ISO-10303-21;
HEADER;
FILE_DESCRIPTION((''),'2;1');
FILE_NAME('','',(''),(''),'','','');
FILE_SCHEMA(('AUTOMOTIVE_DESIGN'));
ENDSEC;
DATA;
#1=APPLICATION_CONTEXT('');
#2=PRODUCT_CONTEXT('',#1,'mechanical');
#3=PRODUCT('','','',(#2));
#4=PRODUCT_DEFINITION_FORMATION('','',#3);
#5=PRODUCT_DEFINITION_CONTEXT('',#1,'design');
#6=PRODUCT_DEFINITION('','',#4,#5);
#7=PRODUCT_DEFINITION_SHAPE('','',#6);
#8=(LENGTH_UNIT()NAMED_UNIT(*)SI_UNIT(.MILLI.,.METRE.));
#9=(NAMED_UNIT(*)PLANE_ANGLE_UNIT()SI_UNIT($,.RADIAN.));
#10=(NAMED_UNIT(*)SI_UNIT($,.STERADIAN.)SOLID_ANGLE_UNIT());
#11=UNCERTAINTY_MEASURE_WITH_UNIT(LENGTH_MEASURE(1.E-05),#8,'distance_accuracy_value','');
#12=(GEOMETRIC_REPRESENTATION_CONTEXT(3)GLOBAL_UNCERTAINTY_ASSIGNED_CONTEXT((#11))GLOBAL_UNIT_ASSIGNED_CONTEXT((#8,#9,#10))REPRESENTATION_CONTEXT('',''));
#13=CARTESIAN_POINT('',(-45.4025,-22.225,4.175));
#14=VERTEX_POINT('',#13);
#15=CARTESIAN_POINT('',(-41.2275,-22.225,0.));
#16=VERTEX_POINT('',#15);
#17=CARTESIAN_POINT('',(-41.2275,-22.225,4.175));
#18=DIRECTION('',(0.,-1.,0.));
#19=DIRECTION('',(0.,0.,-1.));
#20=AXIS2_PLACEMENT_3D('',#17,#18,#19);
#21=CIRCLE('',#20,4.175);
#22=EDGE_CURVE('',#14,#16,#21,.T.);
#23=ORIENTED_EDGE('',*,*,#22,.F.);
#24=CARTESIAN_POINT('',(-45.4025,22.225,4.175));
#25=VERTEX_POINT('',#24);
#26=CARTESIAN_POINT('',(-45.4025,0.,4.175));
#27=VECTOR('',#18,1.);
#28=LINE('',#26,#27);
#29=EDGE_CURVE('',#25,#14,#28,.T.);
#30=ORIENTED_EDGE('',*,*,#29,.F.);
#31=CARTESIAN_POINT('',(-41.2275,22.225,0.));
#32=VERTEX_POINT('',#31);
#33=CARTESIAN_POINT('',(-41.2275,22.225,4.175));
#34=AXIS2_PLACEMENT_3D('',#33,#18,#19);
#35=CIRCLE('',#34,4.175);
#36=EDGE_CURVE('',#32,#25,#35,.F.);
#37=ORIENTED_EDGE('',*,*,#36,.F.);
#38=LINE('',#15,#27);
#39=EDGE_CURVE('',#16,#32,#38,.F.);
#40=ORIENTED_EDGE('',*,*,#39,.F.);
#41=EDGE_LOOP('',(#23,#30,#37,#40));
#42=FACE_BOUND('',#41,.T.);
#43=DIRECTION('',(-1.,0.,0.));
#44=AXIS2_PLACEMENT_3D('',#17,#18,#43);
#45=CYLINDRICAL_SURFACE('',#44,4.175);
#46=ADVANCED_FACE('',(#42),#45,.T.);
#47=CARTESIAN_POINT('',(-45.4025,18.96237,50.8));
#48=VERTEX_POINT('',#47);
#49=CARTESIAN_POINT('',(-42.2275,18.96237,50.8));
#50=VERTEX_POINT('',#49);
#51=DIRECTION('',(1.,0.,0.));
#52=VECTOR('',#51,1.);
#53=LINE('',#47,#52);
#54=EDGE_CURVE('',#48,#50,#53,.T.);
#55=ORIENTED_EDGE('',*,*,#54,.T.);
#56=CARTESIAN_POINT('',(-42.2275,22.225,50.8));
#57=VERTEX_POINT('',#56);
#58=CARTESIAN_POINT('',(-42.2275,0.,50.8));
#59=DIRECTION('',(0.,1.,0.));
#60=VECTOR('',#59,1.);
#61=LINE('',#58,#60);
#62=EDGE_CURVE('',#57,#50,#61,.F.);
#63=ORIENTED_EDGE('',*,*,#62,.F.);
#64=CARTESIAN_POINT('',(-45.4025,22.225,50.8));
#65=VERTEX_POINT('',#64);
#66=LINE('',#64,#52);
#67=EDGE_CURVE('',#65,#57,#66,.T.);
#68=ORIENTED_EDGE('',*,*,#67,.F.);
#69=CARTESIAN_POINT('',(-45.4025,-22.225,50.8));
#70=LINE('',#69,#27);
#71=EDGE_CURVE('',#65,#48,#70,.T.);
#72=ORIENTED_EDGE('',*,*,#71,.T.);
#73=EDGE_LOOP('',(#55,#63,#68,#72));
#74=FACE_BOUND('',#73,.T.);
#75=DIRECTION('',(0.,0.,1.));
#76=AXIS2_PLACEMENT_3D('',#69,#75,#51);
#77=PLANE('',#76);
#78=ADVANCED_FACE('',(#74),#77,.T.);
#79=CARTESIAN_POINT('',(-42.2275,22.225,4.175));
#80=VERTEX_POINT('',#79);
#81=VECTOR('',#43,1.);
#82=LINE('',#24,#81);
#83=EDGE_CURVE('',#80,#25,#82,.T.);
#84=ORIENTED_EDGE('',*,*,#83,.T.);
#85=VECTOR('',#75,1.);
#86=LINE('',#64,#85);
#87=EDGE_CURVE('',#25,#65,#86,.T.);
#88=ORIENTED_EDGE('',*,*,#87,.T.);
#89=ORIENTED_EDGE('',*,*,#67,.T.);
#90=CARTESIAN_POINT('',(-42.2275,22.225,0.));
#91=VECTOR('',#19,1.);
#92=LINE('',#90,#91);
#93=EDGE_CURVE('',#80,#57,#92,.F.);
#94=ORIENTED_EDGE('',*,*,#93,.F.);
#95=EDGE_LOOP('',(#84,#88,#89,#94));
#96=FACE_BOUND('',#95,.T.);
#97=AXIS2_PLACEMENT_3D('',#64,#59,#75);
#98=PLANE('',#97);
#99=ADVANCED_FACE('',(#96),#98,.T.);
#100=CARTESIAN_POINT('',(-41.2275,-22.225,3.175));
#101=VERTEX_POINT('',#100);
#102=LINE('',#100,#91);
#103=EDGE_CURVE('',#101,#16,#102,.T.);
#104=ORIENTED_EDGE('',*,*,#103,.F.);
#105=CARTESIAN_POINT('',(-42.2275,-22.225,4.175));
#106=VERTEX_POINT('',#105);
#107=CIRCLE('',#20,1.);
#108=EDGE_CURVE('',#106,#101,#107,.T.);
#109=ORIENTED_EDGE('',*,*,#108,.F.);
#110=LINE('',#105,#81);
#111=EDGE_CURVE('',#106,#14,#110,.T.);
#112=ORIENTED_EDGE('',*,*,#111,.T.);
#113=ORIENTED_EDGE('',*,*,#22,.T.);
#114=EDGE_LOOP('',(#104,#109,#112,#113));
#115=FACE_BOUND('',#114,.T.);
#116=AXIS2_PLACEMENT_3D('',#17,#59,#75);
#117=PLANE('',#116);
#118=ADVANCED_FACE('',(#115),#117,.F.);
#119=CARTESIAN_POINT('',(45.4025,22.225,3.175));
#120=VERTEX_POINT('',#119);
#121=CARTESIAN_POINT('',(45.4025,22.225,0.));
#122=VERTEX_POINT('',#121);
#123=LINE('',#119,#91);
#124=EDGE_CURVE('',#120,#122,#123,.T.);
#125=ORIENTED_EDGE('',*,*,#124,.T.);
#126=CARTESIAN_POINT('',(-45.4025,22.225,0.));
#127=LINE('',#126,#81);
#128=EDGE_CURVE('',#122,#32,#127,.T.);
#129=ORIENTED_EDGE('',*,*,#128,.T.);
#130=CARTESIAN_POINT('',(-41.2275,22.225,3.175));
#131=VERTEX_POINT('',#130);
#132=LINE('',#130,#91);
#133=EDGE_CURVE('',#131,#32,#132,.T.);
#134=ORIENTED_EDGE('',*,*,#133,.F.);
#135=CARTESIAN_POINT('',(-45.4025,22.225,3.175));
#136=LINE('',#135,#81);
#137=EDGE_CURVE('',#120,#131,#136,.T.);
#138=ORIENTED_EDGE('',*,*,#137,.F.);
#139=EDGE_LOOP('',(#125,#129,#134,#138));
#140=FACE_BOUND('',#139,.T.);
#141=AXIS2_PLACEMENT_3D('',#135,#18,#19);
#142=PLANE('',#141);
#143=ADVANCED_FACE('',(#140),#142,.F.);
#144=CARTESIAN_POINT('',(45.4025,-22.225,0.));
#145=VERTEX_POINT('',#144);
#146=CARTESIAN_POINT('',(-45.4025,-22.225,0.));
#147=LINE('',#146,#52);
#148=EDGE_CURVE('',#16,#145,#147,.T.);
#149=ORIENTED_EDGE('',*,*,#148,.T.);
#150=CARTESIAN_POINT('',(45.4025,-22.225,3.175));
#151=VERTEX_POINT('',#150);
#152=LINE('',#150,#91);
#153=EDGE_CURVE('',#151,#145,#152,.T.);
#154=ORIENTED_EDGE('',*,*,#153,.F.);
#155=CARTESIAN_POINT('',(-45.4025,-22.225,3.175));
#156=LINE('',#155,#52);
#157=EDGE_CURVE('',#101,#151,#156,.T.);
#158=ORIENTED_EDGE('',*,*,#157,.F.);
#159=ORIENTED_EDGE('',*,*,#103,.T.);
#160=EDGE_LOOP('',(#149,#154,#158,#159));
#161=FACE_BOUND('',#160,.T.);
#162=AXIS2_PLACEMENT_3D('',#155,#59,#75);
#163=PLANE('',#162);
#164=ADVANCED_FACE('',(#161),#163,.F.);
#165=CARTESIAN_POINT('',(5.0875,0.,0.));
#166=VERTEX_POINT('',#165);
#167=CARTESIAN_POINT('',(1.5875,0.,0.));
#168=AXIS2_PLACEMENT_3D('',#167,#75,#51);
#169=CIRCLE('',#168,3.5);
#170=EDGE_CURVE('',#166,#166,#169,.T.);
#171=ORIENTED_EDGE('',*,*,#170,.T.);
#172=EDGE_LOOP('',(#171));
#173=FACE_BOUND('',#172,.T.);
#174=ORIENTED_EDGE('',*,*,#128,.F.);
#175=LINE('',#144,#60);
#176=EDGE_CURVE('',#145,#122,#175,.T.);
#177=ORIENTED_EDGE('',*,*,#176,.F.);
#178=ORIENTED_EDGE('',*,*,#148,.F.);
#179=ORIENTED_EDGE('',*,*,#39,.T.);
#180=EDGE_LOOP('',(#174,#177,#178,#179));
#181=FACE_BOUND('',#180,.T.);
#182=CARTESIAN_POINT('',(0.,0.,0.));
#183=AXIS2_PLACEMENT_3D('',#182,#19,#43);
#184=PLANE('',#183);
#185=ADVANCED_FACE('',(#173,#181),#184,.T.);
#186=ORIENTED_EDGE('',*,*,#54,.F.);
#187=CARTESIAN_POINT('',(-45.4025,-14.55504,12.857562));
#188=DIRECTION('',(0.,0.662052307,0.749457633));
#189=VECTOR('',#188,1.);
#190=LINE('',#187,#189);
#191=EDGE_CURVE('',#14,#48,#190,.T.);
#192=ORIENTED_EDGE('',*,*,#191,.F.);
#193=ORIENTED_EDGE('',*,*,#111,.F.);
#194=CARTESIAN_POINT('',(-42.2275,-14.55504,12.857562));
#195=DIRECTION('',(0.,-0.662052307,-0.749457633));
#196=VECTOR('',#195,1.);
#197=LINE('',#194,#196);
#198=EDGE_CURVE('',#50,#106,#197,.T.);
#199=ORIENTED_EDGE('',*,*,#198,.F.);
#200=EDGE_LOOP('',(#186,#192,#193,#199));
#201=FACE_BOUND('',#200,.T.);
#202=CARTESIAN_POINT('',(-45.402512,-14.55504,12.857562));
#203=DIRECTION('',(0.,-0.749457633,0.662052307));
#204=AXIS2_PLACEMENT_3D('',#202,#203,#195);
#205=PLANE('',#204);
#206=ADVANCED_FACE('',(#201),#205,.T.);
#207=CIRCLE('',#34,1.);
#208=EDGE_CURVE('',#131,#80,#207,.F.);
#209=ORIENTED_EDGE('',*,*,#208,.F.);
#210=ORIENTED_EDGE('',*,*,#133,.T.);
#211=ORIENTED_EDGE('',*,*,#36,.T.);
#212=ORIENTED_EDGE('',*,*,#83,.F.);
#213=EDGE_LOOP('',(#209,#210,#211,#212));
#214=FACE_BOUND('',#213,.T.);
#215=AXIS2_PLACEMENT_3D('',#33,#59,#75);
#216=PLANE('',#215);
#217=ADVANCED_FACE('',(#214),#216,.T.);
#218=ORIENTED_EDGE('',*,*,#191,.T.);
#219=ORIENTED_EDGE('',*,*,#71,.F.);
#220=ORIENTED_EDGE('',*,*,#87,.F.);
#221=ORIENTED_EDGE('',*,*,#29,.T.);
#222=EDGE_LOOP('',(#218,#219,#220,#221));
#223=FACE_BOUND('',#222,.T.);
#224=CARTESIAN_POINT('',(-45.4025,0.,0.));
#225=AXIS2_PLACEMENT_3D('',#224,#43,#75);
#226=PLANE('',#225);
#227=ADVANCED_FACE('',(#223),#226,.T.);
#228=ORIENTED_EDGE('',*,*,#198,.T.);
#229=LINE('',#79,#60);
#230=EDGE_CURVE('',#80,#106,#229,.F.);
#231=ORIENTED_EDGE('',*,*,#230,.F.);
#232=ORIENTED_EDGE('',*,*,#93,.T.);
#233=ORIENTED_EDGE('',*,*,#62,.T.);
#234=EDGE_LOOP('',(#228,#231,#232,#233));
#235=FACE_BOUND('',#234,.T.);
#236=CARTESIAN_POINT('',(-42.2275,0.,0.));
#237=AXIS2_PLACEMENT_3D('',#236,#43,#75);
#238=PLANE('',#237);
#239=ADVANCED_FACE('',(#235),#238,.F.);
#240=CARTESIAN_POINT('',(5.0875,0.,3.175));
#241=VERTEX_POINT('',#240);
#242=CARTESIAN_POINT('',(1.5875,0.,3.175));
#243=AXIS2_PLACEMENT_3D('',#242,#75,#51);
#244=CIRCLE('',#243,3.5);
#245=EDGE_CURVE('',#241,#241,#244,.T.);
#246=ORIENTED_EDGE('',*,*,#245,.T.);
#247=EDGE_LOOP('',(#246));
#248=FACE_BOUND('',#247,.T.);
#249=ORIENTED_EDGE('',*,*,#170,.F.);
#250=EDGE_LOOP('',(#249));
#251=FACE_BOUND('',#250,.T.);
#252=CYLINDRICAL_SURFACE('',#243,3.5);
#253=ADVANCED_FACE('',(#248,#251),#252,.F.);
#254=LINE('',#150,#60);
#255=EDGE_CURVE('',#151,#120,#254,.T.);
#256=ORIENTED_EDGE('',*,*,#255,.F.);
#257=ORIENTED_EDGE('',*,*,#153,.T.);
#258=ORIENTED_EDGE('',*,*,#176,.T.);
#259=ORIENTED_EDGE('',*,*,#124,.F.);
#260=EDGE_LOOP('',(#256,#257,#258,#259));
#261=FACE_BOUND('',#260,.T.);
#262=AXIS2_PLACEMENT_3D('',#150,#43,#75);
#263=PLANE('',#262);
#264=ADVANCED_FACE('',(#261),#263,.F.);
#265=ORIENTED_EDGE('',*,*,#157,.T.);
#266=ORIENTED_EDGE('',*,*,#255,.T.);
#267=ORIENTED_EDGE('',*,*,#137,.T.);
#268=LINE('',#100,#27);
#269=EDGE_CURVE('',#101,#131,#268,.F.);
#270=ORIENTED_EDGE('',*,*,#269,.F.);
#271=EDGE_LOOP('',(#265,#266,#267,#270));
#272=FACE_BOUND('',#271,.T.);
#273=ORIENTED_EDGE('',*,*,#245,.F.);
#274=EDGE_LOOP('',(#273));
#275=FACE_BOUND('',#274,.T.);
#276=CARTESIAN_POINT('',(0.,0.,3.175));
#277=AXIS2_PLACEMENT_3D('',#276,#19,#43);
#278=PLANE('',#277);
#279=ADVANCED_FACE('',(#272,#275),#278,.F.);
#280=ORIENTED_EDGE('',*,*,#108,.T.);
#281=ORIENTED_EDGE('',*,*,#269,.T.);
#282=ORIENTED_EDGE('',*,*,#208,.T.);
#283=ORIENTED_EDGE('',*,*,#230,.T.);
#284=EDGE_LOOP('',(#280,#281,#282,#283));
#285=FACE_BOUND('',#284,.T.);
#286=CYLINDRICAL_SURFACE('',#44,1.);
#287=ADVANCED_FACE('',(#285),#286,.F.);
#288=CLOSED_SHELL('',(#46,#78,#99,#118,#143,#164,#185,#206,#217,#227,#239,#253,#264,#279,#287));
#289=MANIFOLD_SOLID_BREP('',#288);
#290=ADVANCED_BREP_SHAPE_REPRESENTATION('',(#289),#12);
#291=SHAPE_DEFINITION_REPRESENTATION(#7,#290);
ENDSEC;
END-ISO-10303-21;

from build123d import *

# Parameters (mm, degrees)
SKETCH1_W                    = 90.805
SKETCH1_H                    = 44.45
BASE_FLANGE1_DEPTH           = 3.175
EDGE_FLANGE1_STRIP_W         = 14.7
EDGE_FLANGE1_STRIP_H         = 3.175
EDGE_FLANGE1_STRIP_CUT_DEPTH = 44.45
EDGE_FLANGE1_DEPTH           = 44.45
CUT_EXTRUDE1_DEPTH           = 107.396140203
CUT_EXTRUDE1_DEPTH_BACK      = 3.175
M6_CLEARANCE_HOLE3_D         = 7


# Sheet-metal steps are written as plain solids
with BuildPart() as part:
    # Sketch1 → Base-Flange1 (new body)
    with BuildSketch(Plane.XY):
        Rectangle(SKETCH1_W, SKETCH1_H)
    extrude(amount=BASE_FLANGE1_DEPTH)

    # Edge-Flange1 strip (across the edge) → Edge-Flange1 strip cut (cut)
    with BuildSketch(Plane(origin=(-45.4025, 22.225, 3.175), x_dir=(1, 0, 0), z_dir=(0, -1, 0))):
        with Locations((-3.175, -1.5875)):
            Rectangle(EDGE_FLANGE1_STRIP_W, EDGE_FLANGE1_STRIP_H)
    extrude(amount=EDGE_FLANGE1_STRIP_CUT_DEPTH, mode=Mode.SUBTRACT)

    # Edge-Flange1 section (across the edge) → Edge-Flange1 (add)
    with BuildSketch(Plane(origin=(-45.4025, 22.225, 3.175), x_dir=(1, 0, 0), z_dir=(0, -1, 0))):
        with BuildLine():
            Line((0, 1), (0, 47.625))
            Line((0, 47.625), (3.175, 47.625))
            Line((3.175, 47.625), (3.175, 1))
            ThreePointArc((3.175, 1), (3.467893219, 0.292893219), (4.175, 0))
            Line((4.175, 0), (4.175, -3.175))
            ThreePointArc((4.175, -3.175), (1.222829189, -1.952170811), (0, 1))
        make_face()
    extrude(amount=EDGE_FLANGE1_DEPTH)

    # Sketch9 → Cut-Extrude1 (cut, two sides: drawn at the far end of the back side and taken through both)
    with BuildSketch(Plane.ZY.offset(45.4025).offset(-CUT_EXTRUDE1_DEPTH_BACK)):
        Polygon((50.8, 167.227851822), (50.8, 22.225), (50.8, 18.96237), (4.175, -22.225), (-104.498494033, -118.224472556), (150.247183568, -256.81721367), (305.545677601, 28.635110708), align=None)
    extrude(amount=CUT_EXTRUDE1_DEPTH + CUT_EXTRUDE1_DEPTH_BACK, mode=Mode.SUBTRACT)

    # M6 Clearance Hole3 (through all)
    with Locations(Plane.XY.offset(3.175)):
        with Locations((1.5875, 0)):
            Hole(M6_CLEARANCE_HOLE3_D / 2)


solid = part.part
